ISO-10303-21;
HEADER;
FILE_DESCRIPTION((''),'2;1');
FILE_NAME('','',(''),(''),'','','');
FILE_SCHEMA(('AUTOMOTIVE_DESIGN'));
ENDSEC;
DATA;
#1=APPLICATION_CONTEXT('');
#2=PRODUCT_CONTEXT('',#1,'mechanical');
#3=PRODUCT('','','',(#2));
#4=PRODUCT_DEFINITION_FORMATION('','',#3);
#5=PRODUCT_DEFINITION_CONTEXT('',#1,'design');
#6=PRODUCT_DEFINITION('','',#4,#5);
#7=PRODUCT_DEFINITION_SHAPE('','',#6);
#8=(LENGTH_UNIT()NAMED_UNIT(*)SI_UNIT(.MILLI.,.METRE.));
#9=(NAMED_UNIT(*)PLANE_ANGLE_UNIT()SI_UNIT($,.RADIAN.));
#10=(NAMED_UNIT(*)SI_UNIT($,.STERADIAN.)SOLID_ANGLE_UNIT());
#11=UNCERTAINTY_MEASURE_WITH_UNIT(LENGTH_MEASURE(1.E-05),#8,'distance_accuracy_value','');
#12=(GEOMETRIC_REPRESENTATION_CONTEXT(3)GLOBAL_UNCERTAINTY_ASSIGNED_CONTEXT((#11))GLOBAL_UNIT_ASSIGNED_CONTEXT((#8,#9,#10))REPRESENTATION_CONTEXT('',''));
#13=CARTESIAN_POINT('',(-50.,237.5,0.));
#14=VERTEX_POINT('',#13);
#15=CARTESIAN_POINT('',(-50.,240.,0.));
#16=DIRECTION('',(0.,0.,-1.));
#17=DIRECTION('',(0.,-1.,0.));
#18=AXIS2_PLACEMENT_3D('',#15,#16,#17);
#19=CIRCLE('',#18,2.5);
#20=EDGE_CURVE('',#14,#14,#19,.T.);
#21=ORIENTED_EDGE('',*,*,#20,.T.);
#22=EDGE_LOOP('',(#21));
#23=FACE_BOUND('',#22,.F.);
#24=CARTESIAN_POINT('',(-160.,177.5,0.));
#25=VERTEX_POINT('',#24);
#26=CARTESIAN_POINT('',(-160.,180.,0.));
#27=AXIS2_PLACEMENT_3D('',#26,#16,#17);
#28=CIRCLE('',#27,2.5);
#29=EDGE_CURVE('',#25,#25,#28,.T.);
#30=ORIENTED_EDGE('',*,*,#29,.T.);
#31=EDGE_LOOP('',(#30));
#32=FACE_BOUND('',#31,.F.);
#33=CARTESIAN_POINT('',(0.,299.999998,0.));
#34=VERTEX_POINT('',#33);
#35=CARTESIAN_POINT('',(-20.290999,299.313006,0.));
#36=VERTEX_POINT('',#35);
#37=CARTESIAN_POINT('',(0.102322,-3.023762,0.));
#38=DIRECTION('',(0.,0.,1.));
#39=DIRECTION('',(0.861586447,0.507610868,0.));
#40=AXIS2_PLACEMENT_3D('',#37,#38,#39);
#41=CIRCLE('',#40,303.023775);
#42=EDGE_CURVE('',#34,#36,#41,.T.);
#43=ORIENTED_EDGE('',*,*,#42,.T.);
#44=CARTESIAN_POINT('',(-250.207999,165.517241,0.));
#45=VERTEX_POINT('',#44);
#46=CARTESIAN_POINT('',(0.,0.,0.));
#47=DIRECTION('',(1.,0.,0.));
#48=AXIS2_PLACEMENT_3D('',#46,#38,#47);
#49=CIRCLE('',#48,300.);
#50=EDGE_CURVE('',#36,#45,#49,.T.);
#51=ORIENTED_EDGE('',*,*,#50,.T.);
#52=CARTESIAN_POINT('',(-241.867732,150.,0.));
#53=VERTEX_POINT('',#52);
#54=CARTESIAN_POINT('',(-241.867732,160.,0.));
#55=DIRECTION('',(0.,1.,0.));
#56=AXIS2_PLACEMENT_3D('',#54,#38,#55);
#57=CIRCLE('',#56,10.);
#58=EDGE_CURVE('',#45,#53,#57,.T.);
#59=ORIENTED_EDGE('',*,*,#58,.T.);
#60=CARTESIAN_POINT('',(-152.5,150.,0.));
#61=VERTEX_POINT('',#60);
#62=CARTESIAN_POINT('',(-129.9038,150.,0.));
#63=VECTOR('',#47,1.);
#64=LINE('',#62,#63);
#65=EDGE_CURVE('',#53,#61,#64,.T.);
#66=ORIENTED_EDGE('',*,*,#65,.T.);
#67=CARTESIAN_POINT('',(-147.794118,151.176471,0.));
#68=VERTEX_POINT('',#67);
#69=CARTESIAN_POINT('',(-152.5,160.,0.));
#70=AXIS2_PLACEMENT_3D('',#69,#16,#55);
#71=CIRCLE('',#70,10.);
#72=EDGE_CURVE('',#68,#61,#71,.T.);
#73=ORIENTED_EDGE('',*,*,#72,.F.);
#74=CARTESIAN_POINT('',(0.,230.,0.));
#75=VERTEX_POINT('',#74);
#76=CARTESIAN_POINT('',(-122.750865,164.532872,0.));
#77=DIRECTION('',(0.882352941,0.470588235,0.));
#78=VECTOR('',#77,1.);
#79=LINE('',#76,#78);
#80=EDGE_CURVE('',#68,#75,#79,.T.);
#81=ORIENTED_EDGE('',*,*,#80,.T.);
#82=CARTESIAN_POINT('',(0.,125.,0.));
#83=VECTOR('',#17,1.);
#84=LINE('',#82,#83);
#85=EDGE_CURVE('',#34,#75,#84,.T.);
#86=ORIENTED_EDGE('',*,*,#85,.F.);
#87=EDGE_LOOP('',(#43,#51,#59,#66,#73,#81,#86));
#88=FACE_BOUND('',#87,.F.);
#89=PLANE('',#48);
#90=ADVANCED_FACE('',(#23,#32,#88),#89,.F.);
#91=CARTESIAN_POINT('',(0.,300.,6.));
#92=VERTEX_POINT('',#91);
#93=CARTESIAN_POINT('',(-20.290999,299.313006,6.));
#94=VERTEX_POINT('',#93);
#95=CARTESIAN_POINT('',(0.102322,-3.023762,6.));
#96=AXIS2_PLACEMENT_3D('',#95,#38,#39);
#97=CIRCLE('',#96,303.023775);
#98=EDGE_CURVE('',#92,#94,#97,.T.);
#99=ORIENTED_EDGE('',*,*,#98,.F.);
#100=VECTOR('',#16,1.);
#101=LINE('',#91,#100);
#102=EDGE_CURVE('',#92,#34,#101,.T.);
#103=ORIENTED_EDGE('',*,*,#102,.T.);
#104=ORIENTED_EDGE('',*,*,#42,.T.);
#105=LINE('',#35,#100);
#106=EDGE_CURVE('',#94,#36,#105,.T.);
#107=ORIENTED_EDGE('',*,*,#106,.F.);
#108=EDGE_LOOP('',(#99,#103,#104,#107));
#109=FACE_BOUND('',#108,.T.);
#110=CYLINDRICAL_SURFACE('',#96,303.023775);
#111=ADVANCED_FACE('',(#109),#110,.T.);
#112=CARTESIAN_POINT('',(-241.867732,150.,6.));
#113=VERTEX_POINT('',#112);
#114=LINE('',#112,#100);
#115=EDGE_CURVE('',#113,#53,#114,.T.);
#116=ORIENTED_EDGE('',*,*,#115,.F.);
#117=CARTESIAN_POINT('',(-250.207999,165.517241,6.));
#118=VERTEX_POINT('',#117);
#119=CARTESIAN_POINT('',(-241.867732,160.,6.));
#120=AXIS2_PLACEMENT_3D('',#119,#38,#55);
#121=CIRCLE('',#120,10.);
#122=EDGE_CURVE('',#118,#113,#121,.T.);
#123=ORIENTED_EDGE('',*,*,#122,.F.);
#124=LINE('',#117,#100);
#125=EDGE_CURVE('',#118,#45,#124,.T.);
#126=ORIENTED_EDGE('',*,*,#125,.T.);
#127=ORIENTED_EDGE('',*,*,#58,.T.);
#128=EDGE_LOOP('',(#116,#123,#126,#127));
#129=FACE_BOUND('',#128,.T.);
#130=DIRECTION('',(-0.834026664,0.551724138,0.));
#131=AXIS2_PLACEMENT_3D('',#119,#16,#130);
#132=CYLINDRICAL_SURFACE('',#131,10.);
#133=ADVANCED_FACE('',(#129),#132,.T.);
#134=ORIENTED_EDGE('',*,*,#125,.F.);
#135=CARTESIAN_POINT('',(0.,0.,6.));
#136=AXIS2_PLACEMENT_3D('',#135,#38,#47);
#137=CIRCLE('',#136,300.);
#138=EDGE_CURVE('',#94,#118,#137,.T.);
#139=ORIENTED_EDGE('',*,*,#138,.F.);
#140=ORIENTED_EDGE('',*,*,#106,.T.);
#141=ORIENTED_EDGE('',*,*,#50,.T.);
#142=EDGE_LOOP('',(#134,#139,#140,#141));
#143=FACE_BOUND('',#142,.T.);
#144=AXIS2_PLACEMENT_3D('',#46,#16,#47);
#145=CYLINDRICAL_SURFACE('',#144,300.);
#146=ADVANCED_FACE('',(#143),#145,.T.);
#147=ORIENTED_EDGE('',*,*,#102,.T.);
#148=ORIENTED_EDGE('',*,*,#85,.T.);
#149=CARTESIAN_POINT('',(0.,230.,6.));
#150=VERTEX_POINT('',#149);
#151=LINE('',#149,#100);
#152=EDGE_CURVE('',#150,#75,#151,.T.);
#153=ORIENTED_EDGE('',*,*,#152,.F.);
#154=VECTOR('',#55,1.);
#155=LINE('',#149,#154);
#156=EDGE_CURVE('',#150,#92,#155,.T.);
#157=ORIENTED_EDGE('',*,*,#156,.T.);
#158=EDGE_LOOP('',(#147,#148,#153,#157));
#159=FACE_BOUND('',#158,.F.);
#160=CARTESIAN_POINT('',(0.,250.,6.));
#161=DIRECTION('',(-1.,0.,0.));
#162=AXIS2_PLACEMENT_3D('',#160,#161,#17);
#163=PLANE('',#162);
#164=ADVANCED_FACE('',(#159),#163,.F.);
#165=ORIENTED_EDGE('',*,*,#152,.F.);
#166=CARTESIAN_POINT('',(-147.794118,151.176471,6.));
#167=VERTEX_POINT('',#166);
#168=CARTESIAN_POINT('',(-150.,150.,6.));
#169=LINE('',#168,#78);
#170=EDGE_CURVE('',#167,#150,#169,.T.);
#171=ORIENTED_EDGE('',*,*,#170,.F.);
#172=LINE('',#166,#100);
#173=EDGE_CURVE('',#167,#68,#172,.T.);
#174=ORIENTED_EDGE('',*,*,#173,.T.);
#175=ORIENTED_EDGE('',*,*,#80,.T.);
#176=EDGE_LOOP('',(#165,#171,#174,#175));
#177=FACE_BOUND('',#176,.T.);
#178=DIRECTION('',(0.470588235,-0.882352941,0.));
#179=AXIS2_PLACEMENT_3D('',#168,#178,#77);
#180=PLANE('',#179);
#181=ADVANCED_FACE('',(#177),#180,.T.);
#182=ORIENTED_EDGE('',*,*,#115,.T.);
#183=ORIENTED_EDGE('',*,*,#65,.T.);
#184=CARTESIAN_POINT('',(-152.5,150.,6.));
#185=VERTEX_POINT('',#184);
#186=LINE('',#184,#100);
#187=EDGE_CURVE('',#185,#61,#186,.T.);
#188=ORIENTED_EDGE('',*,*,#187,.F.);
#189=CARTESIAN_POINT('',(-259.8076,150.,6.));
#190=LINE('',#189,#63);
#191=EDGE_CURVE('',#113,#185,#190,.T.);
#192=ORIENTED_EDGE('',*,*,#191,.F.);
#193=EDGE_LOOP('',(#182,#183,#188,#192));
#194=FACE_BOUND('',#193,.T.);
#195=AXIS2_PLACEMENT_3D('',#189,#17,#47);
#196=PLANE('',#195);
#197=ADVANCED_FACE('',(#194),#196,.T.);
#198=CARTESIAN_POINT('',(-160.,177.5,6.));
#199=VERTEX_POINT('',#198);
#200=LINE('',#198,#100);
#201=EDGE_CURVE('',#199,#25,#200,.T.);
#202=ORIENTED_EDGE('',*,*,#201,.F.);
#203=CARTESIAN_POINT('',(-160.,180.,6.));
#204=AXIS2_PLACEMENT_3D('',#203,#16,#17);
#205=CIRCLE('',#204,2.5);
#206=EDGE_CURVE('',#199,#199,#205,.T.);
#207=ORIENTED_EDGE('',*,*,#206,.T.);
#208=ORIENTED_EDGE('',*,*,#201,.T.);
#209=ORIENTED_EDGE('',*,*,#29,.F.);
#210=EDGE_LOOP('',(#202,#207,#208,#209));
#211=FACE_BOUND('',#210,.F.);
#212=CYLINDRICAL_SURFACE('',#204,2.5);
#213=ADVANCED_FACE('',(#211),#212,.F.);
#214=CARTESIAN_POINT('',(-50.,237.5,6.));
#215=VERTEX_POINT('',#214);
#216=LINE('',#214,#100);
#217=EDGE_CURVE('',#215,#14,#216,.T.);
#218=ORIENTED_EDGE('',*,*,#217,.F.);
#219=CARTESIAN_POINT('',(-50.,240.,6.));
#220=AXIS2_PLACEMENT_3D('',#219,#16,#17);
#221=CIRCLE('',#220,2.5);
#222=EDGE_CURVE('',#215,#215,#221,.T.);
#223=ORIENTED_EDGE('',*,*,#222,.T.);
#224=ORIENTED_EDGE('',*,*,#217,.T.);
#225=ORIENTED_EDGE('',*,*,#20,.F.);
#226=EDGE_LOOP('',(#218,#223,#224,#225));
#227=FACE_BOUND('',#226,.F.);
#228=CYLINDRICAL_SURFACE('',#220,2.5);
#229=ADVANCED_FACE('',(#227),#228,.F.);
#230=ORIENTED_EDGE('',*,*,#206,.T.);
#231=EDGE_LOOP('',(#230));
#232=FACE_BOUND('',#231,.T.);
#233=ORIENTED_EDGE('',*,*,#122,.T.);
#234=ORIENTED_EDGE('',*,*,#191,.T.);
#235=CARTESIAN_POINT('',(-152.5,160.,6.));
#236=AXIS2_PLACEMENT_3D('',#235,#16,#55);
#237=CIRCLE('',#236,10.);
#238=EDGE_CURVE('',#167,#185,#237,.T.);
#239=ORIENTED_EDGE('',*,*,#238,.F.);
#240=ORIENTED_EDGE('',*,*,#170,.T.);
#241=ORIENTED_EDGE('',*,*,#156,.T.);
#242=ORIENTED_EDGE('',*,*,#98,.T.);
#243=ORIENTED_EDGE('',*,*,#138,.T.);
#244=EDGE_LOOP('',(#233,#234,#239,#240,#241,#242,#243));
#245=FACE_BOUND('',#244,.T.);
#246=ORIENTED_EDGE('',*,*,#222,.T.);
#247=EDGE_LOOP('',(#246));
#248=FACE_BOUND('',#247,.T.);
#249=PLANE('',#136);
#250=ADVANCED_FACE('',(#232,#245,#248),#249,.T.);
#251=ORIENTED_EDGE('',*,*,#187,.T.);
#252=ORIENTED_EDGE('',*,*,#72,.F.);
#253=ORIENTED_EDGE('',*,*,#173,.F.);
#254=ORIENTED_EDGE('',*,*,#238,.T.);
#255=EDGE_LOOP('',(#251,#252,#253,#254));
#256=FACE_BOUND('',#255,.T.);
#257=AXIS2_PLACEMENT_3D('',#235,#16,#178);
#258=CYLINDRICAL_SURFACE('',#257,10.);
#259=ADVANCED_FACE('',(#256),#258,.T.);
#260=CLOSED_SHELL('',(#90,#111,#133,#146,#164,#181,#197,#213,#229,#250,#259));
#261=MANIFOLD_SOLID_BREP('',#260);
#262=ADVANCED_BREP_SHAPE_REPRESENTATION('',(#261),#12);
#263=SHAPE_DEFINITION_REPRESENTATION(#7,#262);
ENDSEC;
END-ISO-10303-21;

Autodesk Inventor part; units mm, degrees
ref_plane "YZ Plane" through (0, 0, 0) normal (1, 0, 0) x (0, 1, 0)
ref_plane "XZ Plane" through (0, 0, 0) normal (0, 1, 0) x (-1, 0, 0)
ref_plane "XY Plane" through (0, 0, 0) normal (0, 0, 1) x (1, 0, 0)
sketch "Sketch1" plane through (0, 0, 0) normal (0, 0, 1) x (1, 0, 0)
  circle A0 centre (0, 0) radius 300
  dimension "d0" = 600
extrude "Extrusion1" add sketch "Sketch1" along normal blind 6
sketch "Sketch2" plane through (0, 0, 6) normal (0, 0, 1) x (1, 0, 0)
  line L0 (-170, -250) -> (170, -250)
  line L1 (170, -250) -> (170, 250)
  line L2 (170, 250) -> (-170, 250)
  line L3 (-170, 250) -> (-170, -250)
  line L4 (-170, -250) -> (170, 250) construction
  line L5 (170, -250) -> (-170, 250) construction
  line L6 (-150, 230) -> (150, 230)
  line L7 (150, 230) -> (150, -230)
  line L8 (150, -230) -> (-150, -230)
  line L9 (-150, -230) -> (-150, 230)
  point P0 (0, 0)
  dimension "d3" = 340
  dimension "d4" = 500
  dimension "d5" = 20
sketch "Sketch3" plane through (0, 0, 6) normal (0, 0, 1) x (1, 0, 0)
  line L0 (0, 0) -> (-261.0308, 150.7062)
  line L1 (0, 0) -> (261.1835, 150.7944)
  line L2 (0, 0) -> (299.5929, 0) construction
  arc A0 (261.1835, 150.7944) -> (-261.0308, 150.7062) centre (0.1023, -3.0238) ccw
  dimension "d6" = 120
  dimension "d7" = 30
extrude "Extrusion2" cut sketch "Sketch3" along normal through all both and the other way through all keep common part
sketch "Sketch4" plane through (0, 0, 6) normal (0, 0, 1) x (1, 0, 0)
  arc A0 (-20.2802, 299.3137) -> (-259.8076, 150) centre (0, 0) ccw projected
  line L0 (259.8076, 150) -> (0, 0) projected
  line L1 (-259.8076, 150) -> (259.8076, 150)
  line L2 (259.8076, 150) -> (0, 0)
  line L3 (0, 0) -> (-259.8076, 150)
extrude "Extrusion3" cut sketch "Sketch4" against normal through all
sketch "Sketch5" plane through (0, 0, 6) normal (0, 0, 1) x (1, 0, 0)
  line L0 (-259.8076, 150) -> (259.8076, 150) projected
  arc A0 (259.8076, 150) -> (0, 300) centre (0, 0) ccw projected
  arc A1 (0, 300) -> (-20.2802, 299.3137) centre (0.1023, -3.0238) ccw projected
  arc A2 (-20.2802, 299.3137) -> (-259.8076, 150) centre (0, 0) ccw projected
  line L1 (-150, 230) -> (150, 230) projected
  line L2 (-150, -230) -> (-150, 230) projected
  line L3 (170, 250) -> (-170, 250) projected
  line L4 (-170, 250) -> (-170, -250) projected
  line L5 (-259.8076, 150) -> (259.8076, 150) projected
  line L6 (-150, 150) -> (0, 230)
  line L7 (0, 300) -> (0, 230)
extrude "Extrusion4" cut sketch "Sketch5" against normal through all contours L6 L7 L3 A0 L0 | L3 L7 A0
fillet "Fillet1" radius 10 2 edges at (-259.8076, 150, 3) (-150, 150, 3)
sketch "Sketch6" plane through (0, 0, 6) normal (0, 0, 1) x (1, 0, 0)
  line L0 (0, 230) -> (0, 300) projected
  line L1 (170, 250) -> (-170, 250) projected
  line L2 (-170, 250) -> (-170, -250) projected
  point P0 (0, 0)
  point P1 (-160, 180)
  point P2 (-50, 240)
  dimension "d15" = 50
  dimension "d16" = 70
  dimension "d17" = 10
  dimension "d18" = 10
hole "Hole1" at (-160, 180, 6) at (-50, 240, 6) direction (0, 0, -1) diameter 5 end through all
properties part number "beltMount"
